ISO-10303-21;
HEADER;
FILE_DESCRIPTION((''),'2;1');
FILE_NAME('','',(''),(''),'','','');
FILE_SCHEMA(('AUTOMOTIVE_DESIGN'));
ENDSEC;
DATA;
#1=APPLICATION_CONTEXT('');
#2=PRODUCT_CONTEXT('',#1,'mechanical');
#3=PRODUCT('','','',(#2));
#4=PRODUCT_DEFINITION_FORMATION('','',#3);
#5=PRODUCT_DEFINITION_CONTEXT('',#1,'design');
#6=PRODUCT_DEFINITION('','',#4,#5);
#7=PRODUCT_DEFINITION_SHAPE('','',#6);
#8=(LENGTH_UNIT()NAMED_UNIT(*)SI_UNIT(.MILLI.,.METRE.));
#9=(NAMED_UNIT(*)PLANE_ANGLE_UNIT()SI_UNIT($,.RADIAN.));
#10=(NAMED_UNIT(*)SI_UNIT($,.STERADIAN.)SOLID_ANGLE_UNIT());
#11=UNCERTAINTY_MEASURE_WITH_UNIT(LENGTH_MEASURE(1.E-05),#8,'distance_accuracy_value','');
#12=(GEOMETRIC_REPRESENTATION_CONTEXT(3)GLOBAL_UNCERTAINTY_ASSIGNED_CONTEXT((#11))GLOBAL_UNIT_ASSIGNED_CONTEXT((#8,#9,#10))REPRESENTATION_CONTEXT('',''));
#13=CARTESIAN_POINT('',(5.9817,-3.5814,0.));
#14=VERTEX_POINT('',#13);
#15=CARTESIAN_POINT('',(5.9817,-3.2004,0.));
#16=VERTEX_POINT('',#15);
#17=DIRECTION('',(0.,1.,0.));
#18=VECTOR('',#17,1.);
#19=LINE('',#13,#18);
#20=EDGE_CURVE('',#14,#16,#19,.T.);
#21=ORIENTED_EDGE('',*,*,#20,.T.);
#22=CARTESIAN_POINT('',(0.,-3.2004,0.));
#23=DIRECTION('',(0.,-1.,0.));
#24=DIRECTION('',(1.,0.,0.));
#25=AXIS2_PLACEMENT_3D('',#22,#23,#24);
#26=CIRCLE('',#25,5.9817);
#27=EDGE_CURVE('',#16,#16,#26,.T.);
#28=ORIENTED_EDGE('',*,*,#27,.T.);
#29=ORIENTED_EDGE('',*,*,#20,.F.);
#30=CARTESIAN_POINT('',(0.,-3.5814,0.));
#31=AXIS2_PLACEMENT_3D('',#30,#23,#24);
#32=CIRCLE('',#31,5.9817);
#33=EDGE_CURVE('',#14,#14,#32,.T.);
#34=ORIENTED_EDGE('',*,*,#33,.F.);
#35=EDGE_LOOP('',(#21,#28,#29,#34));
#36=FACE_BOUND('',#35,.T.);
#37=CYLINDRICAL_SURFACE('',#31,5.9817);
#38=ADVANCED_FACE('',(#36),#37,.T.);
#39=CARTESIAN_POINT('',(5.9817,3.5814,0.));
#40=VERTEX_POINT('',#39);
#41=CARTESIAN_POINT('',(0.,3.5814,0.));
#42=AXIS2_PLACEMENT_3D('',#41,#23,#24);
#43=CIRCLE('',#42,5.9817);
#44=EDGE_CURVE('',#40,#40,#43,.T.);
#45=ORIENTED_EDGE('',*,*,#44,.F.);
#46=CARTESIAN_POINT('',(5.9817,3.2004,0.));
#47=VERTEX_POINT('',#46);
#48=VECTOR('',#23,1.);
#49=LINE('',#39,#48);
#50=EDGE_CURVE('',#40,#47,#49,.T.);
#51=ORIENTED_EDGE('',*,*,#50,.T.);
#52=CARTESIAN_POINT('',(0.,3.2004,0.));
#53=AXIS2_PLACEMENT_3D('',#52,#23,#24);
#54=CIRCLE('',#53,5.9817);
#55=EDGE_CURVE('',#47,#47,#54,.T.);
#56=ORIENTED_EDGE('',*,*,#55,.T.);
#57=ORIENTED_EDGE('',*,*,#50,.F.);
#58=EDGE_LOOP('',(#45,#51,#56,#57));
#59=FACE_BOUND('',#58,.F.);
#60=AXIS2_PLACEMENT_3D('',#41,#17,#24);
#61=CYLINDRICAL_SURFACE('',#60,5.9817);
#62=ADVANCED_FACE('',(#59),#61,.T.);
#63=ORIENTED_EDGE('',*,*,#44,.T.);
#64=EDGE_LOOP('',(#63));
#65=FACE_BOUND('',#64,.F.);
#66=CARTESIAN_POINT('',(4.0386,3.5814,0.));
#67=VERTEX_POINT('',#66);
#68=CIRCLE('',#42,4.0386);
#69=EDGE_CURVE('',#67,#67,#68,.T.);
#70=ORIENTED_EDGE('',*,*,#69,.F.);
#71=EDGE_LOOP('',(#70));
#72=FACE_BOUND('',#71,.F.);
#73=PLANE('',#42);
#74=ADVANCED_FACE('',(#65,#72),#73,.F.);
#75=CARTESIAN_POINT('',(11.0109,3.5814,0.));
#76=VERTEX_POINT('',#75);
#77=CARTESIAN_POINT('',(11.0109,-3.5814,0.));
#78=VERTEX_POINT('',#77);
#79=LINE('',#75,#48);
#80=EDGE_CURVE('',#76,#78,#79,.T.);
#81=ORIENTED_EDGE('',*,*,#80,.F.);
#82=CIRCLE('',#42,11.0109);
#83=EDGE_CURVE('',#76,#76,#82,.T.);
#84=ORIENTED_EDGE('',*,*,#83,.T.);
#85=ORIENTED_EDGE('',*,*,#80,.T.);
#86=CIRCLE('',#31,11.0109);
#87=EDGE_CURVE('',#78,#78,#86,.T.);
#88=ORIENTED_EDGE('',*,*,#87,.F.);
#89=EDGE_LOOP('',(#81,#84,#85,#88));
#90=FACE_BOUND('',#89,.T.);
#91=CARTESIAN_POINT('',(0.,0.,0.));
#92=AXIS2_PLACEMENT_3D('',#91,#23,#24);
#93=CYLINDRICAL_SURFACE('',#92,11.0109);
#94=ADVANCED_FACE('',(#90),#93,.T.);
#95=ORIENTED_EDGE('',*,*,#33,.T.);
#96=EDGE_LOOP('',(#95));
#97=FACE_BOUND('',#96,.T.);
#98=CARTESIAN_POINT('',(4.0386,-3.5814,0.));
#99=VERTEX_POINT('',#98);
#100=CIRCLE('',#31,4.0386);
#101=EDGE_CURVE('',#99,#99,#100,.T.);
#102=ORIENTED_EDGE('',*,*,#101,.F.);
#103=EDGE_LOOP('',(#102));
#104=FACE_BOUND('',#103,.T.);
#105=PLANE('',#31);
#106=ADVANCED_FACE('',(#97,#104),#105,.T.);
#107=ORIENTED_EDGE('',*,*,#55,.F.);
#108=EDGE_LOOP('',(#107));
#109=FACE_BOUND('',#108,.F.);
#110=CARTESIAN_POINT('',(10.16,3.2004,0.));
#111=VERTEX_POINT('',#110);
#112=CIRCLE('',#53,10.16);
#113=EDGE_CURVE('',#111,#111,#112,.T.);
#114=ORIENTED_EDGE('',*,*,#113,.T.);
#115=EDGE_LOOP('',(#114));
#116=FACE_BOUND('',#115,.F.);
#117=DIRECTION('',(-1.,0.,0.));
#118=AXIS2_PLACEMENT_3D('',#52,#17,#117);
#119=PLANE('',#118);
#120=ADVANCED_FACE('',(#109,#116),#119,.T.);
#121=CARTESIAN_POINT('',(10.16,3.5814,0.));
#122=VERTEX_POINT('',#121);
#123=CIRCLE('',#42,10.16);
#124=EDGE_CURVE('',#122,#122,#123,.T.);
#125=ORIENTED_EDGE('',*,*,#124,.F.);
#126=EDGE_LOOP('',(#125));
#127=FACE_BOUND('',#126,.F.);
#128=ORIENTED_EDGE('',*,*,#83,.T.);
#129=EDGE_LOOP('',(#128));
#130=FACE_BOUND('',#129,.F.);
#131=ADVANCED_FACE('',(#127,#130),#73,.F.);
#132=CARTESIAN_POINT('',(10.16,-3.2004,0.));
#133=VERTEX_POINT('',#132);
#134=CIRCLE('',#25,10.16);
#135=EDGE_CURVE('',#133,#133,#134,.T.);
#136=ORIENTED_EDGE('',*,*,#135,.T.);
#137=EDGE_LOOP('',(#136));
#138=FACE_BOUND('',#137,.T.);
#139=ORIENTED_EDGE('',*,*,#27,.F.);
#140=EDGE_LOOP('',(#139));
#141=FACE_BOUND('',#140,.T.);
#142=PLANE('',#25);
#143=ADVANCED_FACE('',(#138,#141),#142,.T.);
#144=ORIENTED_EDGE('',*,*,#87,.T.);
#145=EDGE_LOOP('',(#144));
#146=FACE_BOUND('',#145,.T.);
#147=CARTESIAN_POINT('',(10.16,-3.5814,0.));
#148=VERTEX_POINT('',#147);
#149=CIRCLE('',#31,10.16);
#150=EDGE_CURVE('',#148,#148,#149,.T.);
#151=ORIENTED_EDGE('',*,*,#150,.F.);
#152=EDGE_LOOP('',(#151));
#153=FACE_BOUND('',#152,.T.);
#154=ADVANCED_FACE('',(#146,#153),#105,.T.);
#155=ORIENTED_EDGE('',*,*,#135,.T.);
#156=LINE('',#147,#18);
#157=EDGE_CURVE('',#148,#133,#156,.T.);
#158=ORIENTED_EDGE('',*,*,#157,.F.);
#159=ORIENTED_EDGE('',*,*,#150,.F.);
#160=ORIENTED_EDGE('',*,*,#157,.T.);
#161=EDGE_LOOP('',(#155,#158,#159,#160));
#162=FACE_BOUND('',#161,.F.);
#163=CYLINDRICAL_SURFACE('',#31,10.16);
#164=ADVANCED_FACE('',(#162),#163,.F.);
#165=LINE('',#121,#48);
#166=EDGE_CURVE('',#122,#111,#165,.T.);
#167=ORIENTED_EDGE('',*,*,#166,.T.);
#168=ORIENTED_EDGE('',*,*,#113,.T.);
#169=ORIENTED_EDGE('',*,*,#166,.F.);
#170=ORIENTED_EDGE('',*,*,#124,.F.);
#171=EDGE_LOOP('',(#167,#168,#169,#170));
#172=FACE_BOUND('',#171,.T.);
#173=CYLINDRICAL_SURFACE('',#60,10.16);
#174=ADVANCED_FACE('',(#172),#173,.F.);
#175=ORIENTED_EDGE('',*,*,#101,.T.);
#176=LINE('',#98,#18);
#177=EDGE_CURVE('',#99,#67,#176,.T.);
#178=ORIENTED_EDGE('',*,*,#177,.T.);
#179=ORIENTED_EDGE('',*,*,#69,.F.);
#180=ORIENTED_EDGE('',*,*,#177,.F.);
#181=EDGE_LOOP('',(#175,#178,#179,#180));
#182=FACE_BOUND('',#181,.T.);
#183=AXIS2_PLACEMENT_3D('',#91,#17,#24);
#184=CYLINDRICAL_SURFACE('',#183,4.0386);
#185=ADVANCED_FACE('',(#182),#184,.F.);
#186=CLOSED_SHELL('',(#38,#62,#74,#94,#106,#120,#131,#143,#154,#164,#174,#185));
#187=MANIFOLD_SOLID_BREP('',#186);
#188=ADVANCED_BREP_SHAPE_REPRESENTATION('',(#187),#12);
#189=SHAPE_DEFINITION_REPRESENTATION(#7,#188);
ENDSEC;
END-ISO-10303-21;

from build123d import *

# Parameters (mm, degrees)
F0_R     = 11.0109
F0_R_2   = 5.969
F1_DEPTH = 3.5814
F2_R     = 10.16
F2_R_2   = 5.9817
F3_DEPTH = 0.381
F4_R     = 5.969
F4_R_2   = 4.0386
F5_DEPTH = 3.5814


# Not quite as in the source:
# - a pattern or mirror of a feature is missing from the dataset's text; its kind, count and spacing are read off the source's solid


with BuildPart() as f1:
    # F0 (on Front) → F1 (new body, symmetric)
    with BuildSketch(Plane.XZ):
        Circle(F0_R)
        Circle(F0_R_2, mode=Mode.SUBTRACT)
    extrude(amount=F1_DEPTH, both=True)

    # F2 (on face) → F3 (cut)
    with BuildSketch(Plane.XZ.offset(3.5814)):
        Circle(F2_R)
        Circle(F2_R_2, mode=Mode.SUBTRACT)
    f3 = extrude(amount=-F3_DEPTH, mode=Mode.SUBTRACT)

    # F3_copies: F3 across plane
    add(f3.mirror(Plane.ZX), mode=Mode.SUBTRACT)

    # F4 (on Front) → F5 (join, symmetric)
    with BuildSketch(Plane.XZ):
        Circle(F4_R)
        Circle(F4_R_2, mode=Mode.SUBTRACT)
    extrude(amount=F5_DEPTH, both=True)


solid = f1.part
